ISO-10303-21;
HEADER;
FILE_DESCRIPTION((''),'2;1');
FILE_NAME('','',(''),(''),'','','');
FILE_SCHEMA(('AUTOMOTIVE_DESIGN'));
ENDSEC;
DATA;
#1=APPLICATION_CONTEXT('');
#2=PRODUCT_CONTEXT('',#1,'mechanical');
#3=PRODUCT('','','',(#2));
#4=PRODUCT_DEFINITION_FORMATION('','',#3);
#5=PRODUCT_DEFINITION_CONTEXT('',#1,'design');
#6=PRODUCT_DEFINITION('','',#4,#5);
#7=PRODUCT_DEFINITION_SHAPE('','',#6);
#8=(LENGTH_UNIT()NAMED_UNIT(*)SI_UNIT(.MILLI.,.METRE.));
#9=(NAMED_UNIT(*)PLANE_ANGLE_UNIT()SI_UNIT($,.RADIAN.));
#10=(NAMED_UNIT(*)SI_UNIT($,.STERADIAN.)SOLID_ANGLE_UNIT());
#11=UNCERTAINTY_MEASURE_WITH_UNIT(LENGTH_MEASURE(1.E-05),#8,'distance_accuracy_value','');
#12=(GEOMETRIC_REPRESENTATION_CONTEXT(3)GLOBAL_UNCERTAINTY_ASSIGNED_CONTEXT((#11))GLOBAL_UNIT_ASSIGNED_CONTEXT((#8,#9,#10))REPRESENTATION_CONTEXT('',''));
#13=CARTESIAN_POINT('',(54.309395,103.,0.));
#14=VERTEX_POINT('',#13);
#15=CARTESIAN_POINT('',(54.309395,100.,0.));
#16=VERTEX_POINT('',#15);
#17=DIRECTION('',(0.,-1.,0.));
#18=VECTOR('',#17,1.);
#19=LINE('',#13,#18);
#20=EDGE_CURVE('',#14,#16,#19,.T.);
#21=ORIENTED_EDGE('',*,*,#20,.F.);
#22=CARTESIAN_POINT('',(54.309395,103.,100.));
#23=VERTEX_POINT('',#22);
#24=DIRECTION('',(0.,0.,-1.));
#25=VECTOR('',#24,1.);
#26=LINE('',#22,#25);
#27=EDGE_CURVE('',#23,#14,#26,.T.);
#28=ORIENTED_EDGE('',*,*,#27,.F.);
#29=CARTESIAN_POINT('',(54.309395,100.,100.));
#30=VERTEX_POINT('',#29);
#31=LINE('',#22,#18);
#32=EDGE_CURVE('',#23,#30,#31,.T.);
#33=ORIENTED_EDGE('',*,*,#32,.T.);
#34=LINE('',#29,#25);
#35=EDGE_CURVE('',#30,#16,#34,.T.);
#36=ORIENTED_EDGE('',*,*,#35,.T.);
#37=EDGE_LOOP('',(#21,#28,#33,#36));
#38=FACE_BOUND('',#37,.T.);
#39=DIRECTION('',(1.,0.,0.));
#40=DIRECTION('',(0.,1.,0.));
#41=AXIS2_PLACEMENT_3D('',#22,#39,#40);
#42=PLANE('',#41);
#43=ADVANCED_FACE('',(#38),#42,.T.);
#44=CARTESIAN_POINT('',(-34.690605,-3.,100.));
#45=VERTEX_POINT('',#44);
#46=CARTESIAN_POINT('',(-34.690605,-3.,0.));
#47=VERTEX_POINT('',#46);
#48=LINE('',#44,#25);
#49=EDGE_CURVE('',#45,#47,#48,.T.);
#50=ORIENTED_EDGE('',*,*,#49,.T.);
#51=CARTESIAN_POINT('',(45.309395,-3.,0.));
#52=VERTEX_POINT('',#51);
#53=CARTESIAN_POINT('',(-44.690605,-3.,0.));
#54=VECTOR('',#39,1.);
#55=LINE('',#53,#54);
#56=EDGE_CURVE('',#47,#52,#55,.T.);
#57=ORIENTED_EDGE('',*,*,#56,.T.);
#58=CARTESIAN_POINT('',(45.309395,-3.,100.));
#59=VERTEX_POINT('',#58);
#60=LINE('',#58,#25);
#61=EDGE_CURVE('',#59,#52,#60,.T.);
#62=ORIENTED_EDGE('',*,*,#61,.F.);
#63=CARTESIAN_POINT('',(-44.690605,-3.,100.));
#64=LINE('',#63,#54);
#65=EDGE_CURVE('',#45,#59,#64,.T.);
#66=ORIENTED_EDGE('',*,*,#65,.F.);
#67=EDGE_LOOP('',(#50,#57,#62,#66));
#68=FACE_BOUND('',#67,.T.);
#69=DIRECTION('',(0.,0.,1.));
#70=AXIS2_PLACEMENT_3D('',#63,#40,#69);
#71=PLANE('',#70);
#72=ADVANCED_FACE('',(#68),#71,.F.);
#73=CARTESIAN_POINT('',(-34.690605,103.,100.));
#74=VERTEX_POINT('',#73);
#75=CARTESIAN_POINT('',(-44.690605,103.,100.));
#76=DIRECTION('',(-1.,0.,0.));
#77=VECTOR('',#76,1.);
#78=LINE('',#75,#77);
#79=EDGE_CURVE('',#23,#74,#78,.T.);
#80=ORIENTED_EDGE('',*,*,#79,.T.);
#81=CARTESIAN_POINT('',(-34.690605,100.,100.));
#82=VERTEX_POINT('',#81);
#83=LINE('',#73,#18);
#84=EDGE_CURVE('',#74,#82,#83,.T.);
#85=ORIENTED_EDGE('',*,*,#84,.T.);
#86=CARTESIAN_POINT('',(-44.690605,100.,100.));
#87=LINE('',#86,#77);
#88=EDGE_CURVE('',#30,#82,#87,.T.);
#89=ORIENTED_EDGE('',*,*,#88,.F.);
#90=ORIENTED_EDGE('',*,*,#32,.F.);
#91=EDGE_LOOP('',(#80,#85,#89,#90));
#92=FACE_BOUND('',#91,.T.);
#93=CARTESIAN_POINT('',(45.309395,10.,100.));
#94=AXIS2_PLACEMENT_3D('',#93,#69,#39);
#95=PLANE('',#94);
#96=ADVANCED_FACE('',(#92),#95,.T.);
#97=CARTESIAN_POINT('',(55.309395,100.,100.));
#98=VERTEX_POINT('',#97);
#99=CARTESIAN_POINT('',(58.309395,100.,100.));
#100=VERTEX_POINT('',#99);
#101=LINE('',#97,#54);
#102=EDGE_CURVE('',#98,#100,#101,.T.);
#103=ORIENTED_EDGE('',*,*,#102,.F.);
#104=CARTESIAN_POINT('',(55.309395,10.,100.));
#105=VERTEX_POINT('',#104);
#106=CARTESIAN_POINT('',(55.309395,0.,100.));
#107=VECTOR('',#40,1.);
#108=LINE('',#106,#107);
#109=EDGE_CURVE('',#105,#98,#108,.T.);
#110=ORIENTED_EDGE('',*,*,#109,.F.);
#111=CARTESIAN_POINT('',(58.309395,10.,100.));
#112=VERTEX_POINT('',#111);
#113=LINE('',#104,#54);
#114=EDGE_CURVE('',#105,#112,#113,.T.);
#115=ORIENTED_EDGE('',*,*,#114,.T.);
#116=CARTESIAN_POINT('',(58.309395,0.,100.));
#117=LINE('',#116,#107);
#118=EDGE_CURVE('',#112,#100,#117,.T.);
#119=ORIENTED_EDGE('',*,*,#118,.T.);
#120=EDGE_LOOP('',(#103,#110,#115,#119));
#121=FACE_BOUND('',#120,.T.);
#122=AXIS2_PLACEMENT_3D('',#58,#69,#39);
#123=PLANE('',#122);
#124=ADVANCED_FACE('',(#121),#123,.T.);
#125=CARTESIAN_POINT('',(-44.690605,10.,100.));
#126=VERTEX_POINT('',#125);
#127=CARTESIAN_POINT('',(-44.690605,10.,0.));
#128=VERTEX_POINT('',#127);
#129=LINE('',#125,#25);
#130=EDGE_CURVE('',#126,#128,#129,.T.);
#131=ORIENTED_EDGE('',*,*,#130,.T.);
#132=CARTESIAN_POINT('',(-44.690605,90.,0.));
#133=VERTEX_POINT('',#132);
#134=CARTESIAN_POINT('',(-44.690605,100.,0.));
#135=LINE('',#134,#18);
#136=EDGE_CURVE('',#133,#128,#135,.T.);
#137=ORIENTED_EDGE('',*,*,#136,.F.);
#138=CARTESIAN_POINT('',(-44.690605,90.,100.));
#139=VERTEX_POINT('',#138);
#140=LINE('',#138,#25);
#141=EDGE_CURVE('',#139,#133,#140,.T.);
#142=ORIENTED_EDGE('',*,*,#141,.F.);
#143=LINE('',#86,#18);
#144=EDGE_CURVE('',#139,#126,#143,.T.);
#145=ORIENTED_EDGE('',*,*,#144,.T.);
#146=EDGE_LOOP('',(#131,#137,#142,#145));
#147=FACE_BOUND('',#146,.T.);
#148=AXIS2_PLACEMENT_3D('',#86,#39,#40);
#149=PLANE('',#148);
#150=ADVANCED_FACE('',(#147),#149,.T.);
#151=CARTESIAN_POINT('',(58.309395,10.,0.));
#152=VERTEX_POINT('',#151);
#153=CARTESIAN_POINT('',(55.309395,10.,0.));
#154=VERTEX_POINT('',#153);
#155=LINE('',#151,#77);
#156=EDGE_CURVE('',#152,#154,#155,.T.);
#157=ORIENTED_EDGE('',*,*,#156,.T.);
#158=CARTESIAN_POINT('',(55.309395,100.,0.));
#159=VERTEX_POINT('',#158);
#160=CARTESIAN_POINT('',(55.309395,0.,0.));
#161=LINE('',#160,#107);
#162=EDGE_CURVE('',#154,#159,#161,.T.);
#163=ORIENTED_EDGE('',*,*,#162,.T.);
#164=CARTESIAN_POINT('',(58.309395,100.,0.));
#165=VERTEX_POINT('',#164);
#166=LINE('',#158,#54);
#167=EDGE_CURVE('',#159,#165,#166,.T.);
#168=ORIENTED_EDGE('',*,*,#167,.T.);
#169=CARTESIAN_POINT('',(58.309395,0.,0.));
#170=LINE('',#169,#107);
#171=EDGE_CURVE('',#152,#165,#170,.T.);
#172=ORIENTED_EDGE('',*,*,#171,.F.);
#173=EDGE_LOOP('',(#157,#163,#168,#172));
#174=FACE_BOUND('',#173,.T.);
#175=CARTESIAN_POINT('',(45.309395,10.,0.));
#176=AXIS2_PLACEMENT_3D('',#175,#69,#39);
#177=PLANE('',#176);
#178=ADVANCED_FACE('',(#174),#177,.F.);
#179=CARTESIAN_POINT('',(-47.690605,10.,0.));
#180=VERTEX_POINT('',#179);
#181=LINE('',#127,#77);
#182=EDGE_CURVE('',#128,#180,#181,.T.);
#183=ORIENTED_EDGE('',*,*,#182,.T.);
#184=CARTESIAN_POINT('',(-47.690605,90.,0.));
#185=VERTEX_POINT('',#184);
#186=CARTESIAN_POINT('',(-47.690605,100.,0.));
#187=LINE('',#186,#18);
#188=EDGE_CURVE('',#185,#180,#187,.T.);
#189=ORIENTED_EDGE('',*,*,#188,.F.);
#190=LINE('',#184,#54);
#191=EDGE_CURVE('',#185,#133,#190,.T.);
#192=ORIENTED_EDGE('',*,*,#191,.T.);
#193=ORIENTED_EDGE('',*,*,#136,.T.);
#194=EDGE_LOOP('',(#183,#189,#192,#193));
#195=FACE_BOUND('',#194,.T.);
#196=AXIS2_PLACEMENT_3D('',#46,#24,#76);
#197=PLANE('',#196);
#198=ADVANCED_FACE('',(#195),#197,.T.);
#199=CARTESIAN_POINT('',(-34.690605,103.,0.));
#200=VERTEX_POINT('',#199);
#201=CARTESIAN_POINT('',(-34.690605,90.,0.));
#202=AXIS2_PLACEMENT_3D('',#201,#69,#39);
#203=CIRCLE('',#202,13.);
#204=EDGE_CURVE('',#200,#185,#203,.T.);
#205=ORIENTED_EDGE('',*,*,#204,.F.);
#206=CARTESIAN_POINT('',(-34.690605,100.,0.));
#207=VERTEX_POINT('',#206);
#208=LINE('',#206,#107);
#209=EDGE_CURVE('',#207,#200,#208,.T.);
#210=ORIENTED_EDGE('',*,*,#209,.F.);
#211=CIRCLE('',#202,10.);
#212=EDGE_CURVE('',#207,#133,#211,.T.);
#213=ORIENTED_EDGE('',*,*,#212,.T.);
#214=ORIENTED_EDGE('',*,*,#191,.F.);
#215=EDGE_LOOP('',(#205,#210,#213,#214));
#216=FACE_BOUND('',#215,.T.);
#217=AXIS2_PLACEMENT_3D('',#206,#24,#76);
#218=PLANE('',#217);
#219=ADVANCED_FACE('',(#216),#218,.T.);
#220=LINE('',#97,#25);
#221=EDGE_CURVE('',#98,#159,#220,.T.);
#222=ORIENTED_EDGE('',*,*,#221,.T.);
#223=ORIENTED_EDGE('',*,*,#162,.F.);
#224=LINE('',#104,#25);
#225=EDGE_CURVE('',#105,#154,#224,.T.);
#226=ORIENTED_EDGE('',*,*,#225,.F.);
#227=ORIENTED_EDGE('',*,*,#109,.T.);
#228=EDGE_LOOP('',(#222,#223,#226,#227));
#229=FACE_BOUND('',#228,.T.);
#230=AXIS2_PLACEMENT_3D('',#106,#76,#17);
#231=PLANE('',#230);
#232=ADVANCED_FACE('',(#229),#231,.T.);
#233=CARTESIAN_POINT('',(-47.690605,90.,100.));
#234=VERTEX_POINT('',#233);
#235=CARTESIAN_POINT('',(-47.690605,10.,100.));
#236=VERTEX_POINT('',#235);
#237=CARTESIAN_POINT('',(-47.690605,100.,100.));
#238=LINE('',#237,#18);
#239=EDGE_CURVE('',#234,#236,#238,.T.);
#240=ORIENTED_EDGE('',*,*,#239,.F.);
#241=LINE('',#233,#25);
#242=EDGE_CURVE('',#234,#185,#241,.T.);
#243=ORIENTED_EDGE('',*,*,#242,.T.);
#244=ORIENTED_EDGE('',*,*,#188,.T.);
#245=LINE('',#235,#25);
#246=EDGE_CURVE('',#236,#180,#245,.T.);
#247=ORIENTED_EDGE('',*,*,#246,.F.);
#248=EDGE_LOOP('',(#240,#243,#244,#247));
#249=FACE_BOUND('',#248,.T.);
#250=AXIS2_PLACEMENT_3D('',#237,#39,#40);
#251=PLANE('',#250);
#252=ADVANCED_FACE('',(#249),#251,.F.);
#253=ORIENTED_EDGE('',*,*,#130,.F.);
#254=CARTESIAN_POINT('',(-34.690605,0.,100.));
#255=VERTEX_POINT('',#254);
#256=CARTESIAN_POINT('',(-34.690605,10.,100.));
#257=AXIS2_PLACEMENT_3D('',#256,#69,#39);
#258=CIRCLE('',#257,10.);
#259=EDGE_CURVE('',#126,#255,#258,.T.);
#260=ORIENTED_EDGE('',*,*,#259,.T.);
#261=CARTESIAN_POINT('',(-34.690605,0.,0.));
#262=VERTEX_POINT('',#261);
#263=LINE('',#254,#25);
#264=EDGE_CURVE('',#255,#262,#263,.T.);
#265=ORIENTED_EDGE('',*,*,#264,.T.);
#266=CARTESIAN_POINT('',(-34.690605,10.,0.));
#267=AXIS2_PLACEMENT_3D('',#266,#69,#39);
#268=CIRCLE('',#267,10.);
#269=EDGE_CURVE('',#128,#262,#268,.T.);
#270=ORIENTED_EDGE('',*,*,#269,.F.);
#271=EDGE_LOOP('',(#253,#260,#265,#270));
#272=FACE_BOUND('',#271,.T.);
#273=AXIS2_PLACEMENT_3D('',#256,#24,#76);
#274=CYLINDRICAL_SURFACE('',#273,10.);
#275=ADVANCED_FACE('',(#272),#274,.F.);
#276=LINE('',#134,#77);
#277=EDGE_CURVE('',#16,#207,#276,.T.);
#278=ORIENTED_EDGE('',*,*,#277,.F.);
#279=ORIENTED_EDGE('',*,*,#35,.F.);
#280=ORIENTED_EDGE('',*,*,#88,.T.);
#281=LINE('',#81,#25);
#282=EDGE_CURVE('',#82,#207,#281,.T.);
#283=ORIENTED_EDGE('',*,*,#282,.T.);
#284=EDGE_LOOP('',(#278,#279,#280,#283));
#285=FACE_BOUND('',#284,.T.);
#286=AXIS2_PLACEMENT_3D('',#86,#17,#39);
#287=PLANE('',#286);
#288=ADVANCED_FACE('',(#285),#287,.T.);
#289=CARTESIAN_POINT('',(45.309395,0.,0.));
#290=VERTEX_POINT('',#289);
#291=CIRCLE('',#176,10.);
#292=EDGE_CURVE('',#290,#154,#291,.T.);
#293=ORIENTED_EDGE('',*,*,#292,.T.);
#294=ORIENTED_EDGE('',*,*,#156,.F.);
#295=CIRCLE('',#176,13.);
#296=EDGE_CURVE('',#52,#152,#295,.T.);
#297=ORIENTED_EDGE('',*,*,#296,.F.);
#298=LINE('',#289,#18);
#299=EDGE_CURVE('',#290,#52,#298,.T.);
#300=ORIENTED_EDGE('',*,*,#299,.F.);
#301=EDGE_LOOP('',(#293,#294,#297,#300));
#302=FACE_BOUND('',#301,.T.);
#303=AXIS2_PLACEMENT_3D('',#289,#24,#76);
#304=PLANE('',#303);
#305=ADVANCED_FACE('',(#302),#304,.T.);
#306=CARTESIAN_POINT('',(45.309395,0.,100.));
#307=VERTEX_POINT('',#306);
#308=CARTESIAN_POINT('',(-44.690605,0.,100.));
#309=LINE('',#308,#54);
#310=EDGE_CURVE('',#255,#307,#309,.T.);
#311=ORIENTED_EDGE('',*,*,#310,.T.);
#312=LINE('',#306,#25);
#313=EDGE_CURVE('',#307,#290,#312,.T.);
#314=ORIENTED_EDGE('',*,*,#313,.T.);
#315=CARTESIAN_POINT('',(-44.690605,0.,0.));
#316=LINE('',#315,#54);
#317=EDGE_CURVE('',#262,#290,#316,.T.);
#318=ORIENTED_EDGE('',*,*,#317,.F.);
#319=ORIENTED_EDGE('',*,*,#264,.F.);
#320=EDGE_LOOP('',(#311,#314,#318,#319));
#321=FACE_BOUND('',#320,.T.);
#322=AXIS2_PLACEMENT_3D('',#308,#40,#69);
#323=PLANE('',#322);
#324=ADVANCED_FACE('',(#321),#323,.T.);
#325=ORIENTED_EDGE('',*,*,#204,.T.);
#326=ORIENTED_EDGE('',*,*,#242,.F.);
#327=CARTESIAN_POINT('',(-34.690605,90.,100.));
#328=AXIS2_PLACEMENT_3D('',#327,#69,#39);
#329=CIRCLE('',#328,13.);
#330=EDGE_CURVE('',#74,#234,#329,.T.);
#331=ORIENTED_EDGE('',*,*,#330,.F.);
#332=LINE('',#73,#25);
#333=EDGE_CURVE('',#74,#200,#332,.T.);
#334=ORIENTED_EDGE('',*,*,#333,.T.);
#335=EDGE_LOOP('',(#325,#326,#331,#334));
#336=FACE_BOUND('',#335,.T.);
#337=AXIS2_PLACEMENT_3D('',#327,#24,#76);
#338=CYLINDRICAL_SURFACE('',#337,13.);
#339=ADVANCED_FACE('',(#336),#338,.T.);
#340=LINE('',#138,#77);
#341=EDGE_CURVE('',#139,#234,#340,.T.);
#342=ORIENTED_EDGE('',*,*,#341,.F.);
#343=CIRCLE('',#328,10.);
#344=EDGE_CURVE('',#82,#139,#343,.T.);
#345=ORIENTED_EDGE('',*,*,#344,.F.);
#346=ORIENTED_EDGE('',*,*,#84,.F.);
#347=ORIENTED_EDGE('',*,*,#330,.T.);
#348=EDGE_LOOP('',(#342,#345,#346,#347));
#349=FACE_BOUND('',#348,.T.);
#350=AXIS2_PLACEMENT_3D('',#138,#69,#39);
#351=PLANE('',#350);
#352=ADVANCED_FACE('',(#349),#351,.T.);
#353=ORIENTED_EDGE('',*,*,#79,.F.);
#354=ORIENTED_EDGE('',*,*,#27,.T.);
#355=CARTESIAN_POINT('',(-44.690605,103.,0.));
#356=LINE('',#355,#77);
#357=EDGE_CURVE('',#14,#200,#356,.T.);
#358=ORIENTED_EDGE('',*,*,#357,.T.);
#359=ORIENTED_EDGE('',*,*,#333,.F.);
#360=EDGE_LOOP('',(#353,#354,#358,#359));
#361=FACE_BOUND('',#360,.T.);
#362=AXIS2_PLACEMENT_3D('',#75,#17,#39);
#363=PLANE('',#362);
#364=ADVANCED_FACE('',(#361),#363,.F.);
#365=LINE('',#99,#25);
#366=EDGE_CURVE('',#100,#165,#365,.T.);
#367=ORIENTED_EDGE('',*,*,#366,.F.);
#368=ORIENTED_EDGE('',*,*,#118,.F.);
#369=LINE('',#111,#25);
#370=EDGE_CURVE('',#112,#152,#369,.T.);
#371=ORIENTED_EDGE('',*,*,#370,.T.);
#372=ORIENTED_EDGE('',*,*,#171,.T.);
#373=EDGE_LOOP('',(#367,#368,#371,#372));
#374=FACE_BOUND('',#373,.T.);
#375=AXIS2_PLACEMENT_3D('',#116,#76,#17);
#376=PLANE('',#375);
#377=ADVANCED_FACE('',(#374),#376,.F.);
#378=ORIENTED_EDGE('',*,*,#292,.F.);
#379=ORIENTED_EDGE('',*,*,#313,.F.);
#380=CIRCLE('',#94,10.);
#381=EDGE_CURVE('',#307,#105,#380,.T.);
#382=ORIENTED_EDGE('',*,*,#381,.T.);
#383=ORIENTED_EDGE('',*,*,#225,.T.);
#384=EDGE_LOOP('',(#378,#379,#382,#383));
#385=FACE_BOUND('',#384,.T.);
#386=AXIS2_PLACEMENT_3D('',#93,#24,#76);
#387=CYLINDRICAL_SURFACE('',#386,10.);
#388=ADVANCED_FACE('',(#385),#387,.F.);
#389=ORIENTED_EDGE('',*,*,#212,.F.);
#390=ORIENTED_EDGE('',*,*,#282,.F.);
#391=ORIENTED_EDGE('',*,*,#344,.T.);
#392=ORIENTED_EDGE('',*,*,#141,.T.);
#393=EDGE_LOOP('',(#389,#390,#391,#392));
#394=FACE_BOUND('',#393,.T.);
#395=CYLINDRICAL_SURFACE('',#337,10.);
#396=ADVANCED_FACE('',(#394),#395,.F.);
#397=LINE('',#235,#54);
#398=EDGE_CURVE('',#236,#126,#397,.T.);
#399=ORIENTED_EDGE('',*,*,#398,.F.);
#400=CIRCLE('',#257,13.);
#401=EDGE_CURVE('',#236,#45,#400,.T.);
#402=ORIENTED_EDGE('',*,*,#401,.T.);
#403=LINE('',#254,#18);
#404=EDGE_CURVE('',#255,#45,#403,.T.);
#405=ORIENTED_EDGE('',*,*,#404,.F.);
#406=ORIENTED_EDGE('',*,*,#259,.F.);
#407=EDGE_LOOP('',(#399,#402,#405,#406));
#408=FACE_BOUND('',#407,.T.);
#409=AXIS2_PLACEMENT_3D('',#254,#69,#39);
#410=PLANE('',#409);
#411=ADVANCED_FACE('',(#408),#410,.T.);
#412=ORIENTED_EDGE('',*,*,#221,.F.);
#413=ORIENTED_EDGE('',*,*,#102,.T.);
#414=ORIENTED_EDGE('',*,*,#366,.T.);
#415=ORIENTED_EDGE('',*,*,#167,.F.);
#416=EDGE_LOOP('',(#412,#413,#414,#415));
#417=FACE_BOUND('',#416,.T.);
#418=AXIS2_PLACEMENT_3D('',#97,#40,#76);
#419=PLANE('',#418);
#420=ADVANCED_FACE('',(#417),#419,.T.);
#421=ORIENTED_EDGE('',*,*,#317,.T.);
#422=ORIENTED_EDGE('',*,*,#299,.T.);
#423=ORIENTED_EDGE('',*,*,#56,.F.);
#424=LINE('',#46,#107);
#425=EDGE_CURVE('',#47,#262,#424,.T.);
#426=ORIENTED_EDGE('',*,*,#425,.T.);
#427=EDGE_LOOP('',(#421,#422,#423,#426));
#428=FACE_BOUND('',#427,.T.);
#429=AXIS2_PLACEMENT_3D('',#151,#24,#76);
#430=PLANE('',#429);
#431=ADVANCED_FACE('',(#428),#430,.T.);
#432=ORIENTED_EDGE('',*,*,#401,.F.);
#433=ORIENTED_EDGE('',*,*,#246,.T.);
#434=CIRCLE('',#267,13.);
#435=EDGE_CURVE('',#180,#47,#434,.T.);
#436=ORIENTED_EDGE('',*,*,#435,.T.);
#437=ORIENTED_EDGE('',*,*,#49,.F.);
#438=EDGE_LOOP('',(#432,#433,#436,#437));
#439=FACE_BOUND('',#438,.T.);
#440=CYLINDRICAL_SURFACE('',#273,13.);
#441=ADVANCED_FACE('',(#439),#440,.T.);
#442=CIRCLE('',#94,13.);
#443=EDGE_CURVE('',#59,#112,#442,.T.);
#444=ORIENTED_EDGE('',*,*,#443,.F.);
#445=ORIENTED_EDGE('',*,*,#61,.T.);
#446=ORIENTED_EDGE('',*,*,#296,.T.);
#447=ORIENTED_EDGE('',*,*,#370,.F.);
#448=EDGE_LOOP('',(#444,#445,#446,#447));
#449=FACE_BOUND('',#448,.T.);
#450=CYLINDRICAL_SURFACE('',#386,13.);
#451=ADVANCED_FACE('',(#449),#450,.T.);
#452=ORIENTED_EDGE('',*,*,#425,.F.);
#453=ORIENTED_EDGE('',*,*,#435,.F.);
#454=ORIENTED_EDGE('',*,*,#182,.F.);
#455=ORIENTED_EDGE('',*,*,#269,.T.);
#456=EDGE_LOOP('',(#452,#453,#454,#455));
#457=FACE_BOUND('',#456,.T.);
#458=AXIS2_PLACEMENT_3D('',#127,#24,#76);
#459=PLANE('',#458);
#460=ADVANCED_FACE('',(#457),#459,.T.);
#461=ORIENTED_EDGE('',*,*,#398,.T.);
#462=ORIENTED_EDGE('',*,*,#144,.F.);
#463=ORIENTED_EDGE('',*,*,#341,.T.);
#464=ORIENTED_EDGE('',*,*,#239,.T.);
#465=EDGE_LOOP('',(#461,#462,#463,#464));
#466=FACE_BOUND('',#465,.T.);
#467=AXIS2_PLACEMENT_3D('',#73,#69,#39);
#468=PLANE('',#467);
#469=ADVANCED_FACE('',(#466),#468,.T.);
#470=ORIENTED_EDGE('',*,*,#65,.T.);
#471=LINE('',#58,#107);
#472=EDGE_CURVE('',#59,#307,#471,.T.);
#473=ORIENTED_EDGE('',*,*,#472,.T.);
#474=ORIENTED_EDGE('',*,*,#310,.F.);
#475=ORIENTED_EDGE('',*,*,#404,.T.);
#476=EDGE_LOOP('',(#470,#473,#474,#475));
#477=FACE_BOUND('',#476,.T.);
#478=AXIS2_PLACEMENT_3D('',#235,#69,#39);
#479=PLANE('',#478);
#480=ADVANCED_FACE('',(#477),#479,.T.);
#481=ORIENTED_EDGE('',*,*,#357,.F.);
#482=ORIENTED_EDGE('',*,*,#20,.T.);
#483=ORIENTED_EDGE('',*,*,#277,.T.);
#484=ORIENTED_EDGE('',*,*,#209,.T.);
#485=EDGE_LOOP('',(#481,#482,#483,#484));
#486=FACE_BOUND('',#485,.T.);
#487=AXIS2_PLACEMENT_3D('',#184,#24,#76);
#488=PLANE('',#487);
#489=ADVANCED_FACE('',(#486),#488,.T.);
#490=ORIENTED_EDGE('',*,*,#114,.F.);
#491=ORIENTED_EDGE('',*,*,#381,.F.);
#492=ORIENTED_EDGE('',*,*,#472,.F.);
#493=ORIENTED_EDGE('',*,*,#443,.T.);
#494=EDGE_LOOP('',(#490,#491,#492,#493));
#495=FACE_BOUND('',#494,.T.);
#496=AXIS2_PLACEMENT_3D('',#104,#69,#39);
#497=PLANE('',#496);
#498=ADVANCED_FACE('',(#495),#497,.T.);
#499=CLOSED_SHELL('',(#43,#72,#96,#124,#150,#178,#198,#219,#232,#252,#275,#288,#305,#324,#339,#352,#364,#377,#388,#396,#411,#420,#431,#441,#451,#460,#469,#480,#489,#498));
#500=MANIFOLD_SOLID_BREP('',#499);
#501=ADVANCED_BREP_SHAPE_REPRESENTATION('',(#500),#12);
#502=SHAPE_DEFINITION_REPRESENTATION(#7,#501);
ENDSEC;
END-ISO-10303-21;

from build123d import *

# Parameters (mm, degrees)
T_LE_DE_BASE_PLI_E1_DEPTH = 100


# Sheet-metal steps are written as plain solids
with BuildPart() as part:
    # Esquisse1 → Tôle de base pliée1 (new body)
    with BuildSketch(Plane.XY):
        with BuildLine():
            Line((54.309394529, 100), (-34.690605471, 100))
            ThreePointArc((-34.690605471, 100), (-41.761673283, 97.071067812), (-44.690605471, 90))
            Line((-44.690605471, 90), (-44.690605471, 10))
            ThreePointArc((-44.690605471, 10), (-41.761673283, 2.928932188), (-34.690605471, 0))
            Line((-34.690605471, 0), (45.309394529, 0))
            ThreePointArc((45.309394529, 0), (52.38046234, 2.928932188), (55.309394529, 10))
            Line((55.309394529, 10), (55.309394529, 100))
            Line((55.309394529, 100), (58.309394529, 100))
            Line((58.309394529, 100), (58.309394529, 10))
            ThreePointArc((58.309394529, 10), (54.501782684, 0.807611845), (45.309394529, -3))
            Line((45.309394529, -3), (-34.690605471, -3))
            ThreePointArc((-34.690605471, -3), (-43.882993627, 0.807611845), (-47.690605471, 10))
            Line((-47.690605471, 10), (-47.690605471, 90))
            ThreePointArc((-47.690605471, 90), (-43.882993627, 99.192388155), (-34.690605471, 103))
            Line((-34.690605471, 103), (54.309394529, 103))
            Line((54.309394529, 103), (54.309394529, 100))
        make_face()
    extrude(amount=T_LE_DE_BASE_PLI_E1_DEPTH)


solid = part.part
